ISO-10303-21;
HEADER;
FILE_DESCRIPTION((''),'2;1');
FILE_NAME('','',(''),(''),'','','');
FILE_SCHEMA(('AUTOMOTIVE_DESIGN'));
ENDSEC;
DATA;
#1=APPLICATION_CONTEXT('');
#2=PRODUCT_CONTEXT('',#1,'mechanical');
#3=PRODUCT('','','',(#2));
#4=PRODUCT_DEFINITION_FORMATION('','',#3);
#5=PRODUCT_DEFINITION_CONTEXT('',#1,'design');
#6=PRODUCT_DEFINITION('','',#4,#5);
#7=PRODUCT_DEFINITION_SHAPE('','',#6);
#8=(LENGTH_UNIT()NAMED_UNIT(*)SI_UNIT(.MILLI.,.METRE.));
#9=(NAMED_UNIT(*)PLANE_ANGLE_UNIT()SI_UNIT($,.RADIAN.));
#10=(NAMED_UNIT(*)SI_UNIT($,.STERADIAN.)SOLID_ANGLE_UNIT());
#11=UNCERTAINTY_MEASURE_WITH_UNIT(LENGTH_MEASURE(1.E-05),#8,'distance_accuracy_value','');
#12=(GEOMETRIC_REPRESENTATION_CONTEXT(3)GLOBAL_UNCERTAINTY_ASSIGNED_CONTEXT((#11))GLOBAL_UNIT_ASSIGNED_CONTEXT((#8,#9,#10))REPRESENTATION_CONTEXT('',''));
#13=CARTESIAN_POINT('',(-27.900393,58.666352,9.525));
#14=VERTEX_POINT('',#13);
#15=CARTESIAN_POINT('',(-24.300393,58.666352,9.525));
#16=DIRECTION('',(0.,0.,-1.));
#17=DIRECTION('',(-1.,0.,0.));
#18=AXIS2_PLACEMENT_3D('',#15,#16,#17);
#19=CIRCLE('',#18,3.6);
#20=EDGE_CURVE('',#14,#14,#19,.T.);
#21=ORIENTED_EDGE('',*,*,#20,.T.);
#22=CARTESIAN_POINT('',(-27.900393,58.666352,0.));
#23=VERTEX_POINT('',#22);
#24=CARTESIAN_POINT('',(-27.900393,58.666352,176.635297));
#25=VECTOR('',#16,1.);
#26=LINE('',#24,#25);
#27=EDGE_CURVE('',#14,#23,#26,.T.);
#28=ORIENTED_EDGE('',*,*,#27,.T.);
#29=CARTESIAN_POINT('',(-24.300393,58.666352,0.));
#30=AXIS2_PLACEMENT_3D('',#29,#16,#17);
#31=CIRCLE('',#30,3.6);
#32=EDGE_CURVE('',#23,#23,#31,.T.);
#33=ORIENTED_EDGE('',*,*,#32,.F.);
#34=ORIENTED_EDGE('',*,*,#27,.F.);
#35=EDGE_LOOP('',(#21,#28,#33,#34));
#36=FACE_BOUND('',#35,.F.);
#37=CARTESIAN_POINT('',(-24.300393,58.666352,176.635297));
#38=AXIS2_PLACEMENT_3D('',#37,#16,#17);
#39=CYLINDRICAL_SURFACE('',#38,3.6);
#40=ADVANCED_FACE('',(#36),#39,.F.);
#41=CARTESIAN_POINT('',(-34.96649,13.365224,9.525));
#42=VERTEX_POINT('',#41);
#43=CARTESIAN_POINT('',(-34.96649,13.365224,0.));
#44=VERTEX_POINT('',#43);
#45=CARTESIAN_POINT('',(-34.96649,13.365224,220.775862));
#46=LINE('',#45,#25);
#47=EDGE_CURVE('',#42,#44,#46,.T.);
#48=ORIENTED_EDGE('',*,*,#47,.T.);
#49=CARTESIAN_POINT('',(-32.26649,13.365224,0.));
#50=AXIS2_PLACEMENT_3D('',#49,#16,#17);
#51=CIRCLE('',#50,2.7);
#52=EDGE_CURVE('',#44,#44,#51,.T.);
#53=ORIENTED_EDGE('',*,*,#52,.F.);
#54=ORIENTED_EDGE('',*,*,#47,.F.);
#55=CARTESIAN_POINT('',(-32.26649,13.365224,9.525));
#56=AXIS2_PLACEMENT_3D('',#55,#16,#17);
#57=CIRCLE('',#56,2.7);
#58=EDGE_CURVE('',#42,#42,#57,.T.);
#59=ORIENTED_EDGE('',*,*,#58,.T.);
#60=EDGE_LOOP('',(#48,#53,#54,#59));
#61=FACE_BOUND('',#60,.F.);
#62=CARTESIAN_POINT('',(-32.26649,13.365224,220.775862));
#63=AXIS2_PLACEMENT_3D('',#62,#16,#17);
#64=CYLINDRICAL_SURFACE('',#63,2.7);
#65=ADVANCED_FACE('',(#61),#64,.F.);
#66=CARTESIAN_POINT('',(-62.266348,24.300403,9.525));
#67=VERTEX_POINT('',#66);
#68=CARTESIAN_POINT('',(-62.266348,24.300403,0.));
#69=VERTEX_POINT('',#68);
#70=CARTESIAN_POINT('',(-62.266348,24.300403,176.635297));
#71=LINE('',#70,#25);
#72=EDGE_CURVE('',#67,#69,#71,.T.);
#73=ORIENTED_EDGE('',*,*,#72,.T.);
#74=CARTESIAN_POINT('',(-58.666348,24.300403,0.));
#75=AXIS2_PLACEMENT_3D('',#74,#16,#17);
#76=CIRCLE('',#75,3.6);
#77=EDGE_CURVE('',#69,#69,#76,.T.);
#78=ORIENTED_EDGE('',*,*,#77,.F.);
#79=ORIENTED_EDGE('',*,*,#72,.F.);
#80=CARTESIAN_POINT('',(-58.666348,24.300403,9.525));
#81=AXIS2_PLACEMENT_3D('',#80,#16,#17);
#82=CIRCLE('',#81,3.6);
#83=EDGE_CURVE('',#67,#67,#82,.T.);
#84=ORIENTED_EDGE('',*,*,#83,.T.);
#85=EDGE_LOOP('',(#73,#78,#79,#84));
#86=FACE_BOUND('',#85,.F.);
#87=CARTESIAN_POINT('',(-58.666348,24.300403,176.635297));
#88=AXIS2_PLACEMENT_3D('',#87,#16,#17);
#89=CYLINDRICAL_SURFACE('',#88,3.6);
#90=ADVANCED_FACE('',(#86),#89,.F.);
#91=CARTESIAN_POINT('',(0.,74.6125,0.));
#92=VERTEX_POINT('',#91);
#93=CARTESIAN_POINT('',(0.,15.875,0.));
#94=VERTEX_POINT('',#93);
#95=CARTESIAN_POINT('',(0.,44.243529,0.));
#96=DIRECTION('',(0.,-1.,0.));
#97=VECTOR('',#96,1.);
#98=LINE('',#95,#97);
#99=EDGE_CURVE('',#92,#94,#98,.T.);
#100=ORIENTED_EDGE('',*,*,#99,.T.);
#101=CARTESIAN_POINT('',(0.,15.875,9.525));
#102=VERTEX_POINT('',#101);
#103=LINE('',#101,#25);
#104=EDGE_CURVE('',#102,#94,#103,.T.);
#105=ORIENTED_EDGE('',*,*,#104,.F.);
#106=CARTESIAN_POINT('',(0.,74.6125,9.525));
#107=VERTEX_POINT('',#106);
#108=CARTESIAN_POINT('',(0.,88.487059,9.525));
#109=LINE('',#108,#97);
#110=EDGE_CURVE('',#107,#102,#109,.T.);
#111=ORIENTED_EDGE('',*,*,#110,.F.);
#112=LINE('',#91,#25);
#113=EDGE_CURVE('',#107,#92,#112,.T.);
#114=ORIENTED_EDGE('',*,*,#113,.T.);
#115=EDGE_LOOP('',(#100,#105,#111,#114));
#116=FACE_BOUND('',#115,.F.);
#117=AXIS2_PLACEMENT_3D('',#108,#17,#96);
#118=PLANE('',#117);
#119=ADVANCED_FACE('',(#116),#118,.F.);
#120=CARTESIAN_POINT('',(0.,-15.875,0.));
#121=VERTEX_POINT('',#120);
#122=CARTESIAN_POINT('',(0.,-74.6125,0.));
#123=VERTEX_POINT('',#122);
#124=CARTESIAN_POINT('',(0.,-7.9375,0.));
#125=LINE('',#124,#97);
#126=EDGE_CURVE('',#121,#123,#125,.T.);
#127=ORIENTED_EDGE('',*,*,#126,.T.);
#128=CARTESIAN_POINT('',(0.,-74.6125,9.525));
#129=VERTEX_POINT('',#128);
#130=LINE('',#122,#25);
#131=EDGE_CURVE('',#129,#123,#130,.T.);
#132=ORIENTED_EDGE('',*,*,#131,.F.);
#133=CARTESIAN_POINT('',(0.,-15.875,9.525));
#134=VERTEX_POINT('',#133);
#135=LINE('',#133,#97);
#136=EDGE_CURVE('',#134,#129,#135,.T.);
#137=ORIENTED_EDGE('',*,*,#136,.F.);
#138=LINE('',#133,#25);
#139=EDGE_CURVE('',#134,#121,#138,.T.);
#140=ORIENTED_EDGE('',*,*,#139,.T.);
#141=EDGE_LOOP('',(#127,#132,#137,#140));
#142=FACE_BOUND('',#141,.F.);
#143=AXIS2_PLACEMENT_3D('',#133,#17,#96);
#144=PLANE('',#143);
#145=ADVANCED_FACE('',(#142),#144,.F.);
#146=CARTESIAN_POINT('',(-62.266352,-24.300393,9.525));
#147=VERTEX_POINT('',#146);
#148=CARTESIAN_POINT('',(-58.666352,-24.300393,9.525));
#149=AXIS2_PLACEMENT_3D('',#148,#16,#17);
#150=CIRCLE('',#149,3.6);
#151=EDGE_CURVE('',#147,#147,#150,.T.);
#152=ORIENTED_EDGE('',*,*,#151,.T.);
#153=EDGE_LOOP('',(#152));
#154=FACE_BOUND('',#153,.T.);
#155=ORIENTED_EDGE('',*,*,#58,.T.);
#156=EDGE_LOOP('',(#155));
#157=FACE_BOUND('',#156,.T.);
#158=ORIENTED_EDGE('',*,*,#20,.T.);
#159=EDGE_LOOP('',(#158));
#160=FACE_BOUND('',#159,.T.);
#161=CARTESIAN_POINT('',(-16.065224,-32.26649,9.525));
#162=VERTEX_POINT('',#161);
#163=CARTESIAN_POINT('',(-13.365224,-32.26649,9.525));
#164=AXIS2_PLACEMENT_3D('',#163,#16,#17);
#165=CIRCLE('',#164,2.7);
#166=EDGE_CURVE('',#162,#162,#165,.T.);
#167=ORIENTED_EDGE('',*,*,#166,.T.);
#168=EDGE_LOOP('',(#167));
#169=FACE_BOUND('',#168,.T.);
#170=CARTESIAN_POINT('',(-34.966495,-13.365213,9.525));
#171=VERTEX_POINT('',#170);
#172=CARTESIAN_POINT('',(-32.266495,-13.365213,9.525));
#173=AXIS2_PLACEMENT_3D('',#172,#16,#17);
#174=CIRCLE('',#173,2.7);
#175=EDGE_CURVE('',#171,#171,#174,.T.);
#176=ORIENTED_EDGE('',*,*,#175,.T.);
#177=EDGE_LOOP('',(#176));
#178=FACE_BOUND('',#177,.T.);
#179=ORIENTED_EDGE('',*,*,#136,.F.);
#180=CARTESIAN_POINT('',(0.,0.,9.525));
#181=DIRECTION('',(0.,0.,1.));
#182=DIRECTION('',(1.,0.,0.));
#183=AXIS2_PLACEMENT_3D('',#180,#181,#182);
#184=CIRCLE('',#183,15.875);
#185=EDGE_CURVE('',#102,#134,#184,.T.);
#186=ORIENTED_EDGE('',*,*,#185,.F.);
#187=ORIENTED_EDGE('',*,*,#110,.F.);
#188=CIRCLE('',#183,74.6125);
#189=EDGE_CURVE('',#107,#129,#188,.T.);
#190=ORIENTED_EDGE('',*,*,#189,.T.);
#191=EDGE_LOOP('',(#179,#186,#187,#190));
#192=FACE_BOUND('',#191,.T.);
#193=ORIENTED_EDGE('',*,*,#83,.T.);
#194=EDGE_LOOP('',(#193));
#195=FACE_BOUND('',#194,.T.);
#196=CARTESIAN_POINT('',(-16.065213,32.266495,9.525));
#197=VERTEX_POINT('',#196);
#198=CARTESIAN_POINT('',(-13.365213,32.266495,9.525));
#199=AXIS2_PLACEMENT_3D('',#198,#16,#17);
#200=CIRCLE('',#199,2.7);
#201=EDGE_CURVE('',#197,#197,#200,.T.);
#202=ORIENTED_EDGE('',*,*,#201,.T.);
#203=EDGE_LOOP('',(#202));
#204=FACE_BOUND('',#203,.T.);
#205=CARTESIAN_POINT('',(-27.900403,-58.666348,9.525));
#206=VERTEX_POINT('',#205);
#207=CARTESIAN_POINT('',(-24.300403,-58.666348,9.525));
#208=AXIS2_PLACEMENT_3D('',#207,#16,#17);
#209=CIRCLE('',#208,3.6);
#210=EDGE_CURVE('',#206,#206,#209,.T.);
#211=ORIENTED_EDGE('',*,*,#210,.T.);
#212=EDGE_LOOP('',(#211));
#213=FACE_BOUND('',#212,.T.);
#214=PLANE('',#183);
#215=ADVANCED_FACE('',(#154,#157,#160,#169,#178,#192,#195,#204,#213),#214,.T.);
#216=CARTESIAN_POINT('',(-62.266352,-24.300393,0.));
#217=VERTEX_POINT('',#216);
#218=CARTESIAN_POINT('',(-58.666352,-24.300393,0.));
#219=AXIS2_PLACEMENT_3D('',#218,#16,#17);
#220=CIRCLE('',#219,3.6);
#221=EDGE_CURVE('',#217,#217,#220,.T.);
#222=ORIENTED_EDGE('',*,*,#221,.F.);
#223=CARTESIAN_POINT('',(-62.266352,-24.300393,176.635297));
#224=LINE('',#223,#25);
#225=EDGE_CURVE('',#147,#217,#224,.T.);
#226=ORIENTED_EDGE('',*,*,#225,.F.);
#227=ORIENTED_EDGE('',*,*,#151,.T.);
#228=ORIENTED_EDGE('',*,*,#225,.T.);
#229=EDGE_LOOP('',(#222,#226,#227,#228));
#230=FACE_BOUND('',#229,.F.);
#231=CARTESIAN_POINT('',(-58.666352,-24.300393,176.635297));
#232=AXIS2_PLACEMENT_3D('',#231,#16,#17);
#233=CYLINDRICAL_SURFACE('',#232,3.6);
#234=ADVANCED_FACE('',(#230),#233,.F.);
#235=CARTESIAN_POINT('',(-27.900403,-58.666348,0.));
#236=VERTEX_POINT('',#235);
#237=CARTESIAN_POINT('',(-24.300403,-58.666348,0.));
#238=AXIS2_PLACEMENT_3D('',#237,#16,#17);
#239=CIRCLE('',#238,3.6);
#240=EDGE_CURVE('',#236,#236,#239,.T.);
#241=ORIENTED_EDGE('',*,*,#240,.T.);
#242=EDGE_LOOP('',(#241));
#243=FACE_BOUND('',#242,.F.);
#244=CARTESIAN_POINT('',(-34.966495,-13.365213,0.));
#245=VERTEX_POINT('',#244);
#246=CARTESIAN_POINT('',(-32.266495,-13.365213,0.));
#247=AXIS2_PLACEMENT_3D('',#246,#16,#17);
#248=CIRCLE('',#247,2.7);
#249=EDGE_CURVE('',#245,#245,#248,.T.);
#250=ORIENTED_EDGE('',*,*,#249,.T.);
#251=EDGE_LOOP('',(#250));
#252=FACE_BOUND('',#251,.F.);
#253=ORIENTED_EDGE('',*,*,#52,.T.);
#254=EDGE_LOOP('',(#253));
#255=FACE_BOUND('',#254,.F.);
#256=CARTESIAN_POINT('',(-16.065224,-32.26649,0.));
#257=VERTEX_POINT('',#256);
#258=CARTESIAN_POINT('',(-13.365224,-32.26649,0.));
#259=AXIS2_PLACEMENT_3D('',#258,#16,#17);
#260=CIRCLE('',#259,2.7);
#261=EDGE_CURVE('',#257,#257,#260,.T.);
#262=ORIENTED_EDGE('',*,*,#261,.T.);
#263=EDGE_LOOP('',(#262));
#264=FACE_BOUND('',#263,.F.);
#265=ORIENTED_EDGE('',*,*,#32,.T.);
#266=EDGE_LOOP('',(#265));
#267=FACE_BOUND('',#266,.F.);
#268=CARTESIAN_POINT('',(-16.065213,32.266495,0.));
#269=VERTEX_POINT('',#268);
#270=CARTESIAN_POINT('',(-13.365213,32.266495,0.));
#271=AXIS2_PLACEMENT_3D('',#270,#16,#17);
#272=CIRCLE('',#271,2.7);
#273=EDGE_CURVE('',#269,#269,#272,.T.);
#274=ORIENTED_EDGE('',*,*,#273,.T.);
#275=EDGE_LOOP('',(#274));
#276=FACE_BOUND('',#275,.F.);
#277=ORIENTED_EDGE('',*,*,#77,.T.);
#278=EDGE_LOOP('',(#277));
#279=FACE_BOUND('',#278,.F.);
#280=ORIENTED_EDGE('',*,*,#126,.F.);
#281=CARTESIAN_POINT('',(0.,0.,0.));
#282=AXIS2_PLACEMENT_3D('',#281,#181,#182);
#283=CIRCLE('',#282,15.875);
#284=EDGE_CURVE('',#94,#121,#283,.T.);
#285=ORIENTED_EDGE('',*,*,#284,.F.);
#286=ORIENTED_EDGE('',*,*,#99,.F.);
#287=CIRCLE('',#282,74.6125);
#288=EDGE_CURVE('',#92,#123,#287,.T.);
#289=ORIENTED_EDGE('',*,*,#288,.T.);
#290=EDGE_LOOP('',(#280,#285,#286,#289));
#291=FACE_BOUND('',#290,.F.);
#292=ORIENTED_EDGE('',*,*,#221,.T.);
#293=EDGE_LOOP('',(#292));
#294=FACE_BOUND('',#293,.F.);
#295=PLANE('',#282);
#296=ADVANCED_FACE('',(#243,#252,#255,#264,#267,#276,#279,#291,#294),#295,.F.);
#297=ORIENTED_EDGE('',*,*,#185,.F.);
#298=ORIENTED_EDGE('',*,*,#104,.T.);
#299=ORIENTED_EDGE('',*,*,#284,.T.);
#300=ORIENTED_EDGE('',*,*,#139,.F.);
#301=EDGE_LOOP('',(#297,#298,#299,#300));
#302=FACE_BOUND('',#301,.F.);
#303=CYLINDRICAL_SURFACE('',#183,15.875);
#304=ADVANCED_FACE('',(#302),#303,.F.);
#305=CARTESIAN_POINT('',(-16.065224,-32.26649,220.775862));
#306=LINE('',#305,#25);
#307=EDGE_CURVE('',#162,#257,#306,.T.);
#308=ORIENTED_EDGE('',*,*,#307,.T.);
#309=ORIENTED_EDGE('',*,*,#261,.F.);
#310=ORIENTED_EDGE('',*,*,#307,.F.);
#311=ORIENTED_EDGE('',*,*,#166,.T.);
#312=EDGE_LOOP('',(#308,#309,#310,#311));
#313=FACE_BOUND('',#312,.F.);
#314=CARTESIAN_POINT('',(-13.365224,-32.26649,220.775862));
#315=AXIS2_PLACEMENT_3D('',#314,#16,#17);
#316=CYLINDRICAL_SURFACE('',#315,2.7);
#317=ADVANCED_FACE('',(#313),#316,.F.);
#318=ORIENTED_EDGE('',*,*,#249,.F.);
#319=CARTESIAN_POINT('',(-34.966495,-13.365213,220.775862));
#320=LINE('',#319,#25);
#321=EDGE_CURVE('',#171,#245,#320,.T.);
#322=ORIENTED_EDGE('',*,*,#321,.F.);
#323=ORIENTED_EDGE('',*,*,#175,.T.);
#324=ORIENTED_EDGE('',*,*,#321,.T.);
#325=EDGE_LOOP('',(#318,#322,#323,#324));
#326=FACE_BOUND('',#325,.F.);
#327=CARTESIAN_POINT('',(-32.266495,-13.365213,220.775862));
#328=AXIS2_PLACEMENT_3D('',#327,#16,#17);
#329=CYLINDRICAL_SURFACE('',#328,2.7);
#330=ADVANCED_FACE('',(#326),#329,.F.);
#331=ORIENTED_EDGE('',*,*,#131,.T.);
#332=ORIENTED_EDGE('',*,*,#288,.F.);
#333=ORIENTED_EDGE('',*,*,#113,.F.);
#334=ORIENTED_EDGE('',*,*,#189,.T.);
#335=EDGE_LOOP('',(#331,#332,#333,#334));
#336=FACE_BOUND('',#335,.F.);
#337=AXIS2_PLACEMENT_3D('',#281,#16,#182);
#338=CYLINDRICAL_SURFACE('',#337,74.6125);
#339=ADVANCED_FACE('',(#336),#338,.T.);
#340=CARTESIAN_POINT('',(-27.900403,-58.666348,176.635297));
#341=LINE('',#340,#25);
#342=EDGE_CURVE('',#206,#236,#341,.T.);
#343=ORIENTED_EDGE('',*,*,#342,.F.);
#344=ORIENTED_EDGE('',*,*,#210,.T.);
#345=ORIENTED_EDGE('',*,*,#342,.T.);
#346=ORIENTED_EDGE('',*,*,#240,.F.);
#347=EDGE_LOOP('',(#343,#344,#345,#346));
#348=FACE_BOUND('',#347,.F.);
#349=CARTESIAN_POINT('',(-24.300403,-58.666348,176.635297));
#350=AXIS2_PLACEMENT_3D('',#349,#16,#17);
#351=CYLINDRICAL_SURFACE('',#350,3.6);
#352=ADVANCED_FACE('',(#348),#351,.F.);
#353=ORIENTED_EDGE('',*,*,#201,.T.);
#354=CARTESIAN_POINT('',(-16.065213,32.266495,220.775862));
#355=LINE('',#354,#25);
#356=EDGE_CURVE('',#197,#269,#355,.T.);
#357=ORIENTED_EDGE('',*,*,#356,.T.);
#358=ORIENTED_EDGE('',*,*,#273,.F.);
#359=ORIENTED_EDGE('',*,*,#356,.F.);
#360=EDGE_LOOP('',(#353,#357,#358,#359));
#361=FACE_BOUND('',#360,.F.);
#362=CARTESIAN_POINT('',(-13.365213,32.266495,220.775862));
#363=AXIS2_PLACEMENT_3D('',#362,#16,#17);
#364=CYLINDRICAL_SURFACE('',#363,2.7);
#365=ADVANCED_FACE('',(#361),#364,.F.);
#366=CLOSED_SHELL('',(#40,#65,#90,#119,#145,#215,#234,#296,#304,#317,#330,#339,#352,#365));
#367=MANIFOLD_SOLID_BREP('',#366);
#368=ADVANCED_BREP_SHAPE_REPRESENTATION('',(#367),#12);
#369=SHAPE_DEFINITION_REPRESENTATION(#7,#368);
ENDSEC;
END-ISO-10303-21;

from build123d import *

# Parameters (mm, degrees)
F0_R     = 74.6125
F1_DEPTH = 9.525
F2_R     = 15.875
F3_DEPTH = 9.526
F5_D     = 5.4
F6_R     = 2.7
F7_DEPTH = 9.526
F9_D     = 7.2


with BuildPart() as f1:
    # F0 (on Top) → F1 (new body)
    with BuildSketch(Plane.XY):
        Circle(F0_R)
    extrude(amount=F1_DEPTH)

    # F2 (on face) → F3 (cut, through all)
    with BuildSketch(Plane.XY.offset(9.525)):
        Circle(F2_R)
    extrude(amount=-F3_DEPTH, mode=Mode.SUBTRACT)

    # F5 (through all)
    with Locations(Plane.XY.offset(9.525)):
        with Locations((-13.3652133, 32.2664949823), (-32.2664903636, 13.3652244507), (-32.2664949823, -13.3652133), (-13.3652244507, -32.2664903636), (13.3652133, -32.2664949823), (32.2664903636, -13.3652244507), (32.2664949823, 13.3652133), (13.3652244507, 32.2664903636)):
            Hole(F5_D / 2)

    # F6 (on face) → F7 (cut, through all)
    with BuildSketch(Plane.XY.offset(9.525)):
        with BuildLine():
            Line((92.0014753938, 88.4870588779), (0, 88.4870588779))
            Line((0, 88.4870588779), (0, 74.6125))
            ThreePointArc((0, 74.6125), (52.7590047113, 52.7590047113), (74.6125, 0))
            ThreePointArc((74.6125, 0), (52.7590047113, -52.7590047113), (0, -74.6125))
            Line((0, -74.6125), (0, -93.3939293027))
            Line((0, -93.3939293027), (92.0014753938, -93.3939293027))
            Line((92.0014753938, -93.3939293027), (92.0014753938, 88.4870588779))
        make_face()
        with BuildLine():
            ThreePointArc((74.6125, 0), (52.7590047113, 52.7590047113), (0, 74.6125))
            Line((0, 74.6125), (0, 15.875))
            ThreePointArc((0, 15.875), (11.2253201513, 11.2253201513), (15.875, 0))
            ThreePointArc((15.875, 0), (11.2253201513, -11.2253201513), (0, -15.875))
            Line((0, -15.875), (0, -74.6125))
            ThreePointArc((0, -74.6125), (52.7590047113, -52.7590047113), (74.6125, 0))
        make_face()
        with Locations((13.3652133, -32.2664949823)):
            Circle(F6_R, mode=Mode.SUBTRACT)
        with Locations((32.2664903636, -13.3652244507)):
            Circle(F6_R, mode=Mode.SUBTRACT)
        with Locations((32.2664949823, 13.3652133)):
            Circle(F6_R, mode=Mode.SUBTRACT)
        with Locations((13.3652244507, 32.2664903636)):
            Circle(F6_R, mode=Mode.SUBTRACT)
    extrude(amount=-F7_DEPTH, mode=Mode.SUBTRACT)

    # F9 (through all)
    with Locations(Plane.XY.offset(9.525)):
        with Locations((-24.300392725, 58.6663524809), (-58.6663481481, 24.3004031854), (-58.6663524809, -24.300392725), (-24.3004031854, -58.6663481481)):
            Hole(F9_D / 2)


solid = f1.part
